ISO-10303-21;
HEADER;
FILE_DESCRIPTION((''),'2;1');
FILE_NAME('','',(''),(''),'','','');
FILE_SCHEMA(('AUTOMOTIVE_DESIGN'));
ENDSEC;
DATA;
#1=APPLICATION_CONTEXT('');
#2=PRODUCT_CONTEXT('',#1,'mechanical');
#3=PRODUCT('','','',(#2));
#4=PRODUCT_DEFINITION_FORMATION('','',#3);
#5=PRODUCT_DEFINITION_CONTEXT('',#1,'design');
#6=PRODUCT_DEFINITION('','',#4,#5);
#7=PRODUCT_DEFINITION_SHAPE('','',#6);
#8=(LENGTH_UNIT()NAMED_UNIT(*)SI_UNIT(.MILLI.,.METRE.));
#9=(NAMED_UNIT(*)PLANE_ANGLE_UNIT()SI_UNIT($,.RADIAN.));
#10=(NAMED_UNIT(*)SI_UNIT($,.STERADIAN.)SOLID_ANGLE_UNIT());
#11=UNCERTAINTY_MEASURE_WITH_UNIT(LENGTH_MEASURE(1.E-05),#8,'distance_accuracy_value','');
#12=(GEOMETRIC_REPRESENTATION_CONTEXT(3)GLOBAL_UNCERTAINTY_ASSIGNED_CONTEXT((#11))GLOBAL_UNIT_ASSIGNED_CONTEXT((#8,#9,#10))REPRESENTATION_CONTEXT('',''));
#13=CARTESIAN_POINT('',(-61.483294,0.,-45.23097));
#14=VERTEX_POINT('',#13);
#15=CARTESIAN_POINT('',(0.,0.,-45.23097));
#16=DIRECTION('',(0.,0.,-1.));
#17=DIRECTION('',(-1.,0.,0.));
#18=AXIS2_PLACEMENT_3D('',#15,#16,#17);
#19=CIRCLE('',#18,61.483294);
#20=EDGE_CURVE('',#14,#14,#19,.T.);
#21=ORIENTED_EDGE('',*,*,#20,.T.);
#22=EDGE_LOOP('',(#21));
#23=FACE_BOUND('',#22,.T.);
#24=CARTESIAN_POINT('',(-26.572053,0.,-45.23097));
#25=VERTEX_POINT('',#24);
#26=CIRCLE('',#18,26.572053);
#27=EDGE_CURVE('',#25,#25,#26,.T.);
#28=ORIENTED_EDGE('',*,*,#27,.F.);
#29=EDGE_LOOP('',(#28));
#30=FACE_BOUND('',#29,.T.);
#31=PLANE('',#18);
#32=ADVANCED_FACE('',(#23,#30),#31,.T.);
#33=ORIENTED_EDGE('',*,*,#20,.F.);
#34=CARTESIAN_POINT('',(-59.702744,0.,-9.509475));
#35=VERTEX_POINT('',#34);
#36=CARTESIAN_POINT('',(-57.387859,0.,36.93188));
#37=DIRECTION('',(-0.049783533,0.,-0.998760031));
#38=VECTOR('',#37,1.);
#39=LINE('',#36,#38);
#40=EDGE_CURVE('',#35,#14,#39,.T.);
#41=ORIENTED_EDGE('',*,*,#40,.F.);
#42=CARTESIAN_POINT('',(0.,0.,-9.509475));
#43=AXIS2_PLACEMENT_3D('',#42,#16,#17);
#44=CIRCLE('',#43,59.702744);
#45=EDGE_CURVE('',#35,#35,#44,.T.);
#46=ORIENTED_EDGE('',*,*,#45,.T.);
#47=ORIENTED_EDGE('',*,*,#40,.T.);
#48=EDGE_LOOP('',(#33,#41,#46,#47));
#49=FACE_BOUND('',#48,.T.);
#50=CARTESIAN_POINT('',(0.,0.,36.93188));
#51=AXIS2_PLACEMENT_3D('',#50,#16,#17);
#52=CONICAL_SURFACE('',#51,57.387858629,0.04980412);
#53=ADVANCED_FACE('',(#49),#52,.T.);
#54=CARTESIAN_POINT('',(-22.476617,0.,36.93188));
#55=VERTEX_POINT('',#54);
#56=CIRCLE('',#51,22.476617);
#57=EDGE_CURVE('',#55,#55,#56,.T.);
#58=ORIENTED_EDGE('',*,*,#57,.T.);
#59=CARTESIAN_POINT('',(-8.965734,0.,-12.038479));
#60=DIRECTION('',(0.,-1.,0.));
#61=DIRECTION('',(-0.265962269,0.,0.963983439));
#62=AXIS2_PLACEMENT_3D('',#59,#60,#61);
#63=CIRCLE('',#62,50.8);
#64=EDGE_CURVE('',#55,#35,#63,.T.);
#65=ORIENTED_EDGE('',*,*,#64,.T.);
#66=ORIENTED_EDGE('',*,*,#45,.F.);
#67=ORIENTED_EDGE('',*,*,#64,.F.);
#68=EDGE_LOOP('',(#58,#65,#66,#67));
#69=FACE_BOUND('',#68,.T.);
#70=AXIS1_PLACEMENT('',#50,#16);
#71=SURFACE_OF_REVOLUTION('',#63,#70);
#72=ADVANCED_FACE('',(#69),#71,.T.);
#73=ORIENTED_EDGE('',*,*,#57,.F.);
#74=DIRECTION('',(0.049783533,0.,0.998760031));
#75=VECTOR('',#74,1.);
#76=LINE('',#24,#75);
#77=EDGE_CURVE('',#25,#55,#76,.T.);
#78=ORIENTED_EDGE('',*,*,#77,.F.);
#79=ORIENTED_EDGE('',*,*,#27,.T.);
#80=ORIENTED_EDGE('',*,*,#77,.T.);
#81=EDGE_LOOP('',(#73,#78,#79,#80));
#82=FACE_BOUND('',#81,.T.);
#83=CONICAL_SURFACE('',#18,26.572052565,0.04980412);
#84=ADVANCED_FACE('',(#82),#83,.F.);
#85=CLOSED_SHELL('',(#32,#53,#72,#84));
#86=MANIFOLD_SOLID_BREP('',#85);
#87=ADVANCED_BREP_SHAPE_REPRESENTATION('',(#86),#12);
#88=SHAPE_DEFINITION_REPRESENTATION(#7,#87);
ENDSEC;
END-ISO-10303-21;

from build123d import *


# Not quite as in the source:
# - a fillet or chamfer that OpenCascade refuses, or shapes differently, is made with other operations: its cross-section is extruded or revolved along the edge and cut away or added


with BuildPart() as f1:
    # F0 (on Front) → F1 (revolve)
    with BuildSketch(Plane.XZ):
        Polygon((-22.4766174228, 36.9318798184), (-57.3878586292, 36.9318798184), (-61.4832937717, -45.2309697866), (-26.5720525653, -45.2309697866), align=None)
    revolve(axis=Axis((0, 0, 12.7753838897), (0, 0, -1)))

    # F2: fillet of radius 50.8 on 1 edges, made by hand

    # F2_s1 → F2_t2 (revolve, cut)
    with BuildSketch(Plane.XZ):
        with BuildLine():
            ThreePointArc((-22.4766174228, 36.9318798184), (-48.6034410023, 19.7340280309), (-59.7027437541, -9.5094754338))
            Line((-59.7027437541, -9.5094754338), (-57.3878586292, 36.9318798184))
            Line((-57.3878586292, 36.9318798184), (-22.4766174228, 36.9318798184))
        make_face()
    revolve(axis=Axis((0, 0, 36.9318798184), (0, 0, -1)), mode=Mode.SUBTRACT)


solid = f1.part
